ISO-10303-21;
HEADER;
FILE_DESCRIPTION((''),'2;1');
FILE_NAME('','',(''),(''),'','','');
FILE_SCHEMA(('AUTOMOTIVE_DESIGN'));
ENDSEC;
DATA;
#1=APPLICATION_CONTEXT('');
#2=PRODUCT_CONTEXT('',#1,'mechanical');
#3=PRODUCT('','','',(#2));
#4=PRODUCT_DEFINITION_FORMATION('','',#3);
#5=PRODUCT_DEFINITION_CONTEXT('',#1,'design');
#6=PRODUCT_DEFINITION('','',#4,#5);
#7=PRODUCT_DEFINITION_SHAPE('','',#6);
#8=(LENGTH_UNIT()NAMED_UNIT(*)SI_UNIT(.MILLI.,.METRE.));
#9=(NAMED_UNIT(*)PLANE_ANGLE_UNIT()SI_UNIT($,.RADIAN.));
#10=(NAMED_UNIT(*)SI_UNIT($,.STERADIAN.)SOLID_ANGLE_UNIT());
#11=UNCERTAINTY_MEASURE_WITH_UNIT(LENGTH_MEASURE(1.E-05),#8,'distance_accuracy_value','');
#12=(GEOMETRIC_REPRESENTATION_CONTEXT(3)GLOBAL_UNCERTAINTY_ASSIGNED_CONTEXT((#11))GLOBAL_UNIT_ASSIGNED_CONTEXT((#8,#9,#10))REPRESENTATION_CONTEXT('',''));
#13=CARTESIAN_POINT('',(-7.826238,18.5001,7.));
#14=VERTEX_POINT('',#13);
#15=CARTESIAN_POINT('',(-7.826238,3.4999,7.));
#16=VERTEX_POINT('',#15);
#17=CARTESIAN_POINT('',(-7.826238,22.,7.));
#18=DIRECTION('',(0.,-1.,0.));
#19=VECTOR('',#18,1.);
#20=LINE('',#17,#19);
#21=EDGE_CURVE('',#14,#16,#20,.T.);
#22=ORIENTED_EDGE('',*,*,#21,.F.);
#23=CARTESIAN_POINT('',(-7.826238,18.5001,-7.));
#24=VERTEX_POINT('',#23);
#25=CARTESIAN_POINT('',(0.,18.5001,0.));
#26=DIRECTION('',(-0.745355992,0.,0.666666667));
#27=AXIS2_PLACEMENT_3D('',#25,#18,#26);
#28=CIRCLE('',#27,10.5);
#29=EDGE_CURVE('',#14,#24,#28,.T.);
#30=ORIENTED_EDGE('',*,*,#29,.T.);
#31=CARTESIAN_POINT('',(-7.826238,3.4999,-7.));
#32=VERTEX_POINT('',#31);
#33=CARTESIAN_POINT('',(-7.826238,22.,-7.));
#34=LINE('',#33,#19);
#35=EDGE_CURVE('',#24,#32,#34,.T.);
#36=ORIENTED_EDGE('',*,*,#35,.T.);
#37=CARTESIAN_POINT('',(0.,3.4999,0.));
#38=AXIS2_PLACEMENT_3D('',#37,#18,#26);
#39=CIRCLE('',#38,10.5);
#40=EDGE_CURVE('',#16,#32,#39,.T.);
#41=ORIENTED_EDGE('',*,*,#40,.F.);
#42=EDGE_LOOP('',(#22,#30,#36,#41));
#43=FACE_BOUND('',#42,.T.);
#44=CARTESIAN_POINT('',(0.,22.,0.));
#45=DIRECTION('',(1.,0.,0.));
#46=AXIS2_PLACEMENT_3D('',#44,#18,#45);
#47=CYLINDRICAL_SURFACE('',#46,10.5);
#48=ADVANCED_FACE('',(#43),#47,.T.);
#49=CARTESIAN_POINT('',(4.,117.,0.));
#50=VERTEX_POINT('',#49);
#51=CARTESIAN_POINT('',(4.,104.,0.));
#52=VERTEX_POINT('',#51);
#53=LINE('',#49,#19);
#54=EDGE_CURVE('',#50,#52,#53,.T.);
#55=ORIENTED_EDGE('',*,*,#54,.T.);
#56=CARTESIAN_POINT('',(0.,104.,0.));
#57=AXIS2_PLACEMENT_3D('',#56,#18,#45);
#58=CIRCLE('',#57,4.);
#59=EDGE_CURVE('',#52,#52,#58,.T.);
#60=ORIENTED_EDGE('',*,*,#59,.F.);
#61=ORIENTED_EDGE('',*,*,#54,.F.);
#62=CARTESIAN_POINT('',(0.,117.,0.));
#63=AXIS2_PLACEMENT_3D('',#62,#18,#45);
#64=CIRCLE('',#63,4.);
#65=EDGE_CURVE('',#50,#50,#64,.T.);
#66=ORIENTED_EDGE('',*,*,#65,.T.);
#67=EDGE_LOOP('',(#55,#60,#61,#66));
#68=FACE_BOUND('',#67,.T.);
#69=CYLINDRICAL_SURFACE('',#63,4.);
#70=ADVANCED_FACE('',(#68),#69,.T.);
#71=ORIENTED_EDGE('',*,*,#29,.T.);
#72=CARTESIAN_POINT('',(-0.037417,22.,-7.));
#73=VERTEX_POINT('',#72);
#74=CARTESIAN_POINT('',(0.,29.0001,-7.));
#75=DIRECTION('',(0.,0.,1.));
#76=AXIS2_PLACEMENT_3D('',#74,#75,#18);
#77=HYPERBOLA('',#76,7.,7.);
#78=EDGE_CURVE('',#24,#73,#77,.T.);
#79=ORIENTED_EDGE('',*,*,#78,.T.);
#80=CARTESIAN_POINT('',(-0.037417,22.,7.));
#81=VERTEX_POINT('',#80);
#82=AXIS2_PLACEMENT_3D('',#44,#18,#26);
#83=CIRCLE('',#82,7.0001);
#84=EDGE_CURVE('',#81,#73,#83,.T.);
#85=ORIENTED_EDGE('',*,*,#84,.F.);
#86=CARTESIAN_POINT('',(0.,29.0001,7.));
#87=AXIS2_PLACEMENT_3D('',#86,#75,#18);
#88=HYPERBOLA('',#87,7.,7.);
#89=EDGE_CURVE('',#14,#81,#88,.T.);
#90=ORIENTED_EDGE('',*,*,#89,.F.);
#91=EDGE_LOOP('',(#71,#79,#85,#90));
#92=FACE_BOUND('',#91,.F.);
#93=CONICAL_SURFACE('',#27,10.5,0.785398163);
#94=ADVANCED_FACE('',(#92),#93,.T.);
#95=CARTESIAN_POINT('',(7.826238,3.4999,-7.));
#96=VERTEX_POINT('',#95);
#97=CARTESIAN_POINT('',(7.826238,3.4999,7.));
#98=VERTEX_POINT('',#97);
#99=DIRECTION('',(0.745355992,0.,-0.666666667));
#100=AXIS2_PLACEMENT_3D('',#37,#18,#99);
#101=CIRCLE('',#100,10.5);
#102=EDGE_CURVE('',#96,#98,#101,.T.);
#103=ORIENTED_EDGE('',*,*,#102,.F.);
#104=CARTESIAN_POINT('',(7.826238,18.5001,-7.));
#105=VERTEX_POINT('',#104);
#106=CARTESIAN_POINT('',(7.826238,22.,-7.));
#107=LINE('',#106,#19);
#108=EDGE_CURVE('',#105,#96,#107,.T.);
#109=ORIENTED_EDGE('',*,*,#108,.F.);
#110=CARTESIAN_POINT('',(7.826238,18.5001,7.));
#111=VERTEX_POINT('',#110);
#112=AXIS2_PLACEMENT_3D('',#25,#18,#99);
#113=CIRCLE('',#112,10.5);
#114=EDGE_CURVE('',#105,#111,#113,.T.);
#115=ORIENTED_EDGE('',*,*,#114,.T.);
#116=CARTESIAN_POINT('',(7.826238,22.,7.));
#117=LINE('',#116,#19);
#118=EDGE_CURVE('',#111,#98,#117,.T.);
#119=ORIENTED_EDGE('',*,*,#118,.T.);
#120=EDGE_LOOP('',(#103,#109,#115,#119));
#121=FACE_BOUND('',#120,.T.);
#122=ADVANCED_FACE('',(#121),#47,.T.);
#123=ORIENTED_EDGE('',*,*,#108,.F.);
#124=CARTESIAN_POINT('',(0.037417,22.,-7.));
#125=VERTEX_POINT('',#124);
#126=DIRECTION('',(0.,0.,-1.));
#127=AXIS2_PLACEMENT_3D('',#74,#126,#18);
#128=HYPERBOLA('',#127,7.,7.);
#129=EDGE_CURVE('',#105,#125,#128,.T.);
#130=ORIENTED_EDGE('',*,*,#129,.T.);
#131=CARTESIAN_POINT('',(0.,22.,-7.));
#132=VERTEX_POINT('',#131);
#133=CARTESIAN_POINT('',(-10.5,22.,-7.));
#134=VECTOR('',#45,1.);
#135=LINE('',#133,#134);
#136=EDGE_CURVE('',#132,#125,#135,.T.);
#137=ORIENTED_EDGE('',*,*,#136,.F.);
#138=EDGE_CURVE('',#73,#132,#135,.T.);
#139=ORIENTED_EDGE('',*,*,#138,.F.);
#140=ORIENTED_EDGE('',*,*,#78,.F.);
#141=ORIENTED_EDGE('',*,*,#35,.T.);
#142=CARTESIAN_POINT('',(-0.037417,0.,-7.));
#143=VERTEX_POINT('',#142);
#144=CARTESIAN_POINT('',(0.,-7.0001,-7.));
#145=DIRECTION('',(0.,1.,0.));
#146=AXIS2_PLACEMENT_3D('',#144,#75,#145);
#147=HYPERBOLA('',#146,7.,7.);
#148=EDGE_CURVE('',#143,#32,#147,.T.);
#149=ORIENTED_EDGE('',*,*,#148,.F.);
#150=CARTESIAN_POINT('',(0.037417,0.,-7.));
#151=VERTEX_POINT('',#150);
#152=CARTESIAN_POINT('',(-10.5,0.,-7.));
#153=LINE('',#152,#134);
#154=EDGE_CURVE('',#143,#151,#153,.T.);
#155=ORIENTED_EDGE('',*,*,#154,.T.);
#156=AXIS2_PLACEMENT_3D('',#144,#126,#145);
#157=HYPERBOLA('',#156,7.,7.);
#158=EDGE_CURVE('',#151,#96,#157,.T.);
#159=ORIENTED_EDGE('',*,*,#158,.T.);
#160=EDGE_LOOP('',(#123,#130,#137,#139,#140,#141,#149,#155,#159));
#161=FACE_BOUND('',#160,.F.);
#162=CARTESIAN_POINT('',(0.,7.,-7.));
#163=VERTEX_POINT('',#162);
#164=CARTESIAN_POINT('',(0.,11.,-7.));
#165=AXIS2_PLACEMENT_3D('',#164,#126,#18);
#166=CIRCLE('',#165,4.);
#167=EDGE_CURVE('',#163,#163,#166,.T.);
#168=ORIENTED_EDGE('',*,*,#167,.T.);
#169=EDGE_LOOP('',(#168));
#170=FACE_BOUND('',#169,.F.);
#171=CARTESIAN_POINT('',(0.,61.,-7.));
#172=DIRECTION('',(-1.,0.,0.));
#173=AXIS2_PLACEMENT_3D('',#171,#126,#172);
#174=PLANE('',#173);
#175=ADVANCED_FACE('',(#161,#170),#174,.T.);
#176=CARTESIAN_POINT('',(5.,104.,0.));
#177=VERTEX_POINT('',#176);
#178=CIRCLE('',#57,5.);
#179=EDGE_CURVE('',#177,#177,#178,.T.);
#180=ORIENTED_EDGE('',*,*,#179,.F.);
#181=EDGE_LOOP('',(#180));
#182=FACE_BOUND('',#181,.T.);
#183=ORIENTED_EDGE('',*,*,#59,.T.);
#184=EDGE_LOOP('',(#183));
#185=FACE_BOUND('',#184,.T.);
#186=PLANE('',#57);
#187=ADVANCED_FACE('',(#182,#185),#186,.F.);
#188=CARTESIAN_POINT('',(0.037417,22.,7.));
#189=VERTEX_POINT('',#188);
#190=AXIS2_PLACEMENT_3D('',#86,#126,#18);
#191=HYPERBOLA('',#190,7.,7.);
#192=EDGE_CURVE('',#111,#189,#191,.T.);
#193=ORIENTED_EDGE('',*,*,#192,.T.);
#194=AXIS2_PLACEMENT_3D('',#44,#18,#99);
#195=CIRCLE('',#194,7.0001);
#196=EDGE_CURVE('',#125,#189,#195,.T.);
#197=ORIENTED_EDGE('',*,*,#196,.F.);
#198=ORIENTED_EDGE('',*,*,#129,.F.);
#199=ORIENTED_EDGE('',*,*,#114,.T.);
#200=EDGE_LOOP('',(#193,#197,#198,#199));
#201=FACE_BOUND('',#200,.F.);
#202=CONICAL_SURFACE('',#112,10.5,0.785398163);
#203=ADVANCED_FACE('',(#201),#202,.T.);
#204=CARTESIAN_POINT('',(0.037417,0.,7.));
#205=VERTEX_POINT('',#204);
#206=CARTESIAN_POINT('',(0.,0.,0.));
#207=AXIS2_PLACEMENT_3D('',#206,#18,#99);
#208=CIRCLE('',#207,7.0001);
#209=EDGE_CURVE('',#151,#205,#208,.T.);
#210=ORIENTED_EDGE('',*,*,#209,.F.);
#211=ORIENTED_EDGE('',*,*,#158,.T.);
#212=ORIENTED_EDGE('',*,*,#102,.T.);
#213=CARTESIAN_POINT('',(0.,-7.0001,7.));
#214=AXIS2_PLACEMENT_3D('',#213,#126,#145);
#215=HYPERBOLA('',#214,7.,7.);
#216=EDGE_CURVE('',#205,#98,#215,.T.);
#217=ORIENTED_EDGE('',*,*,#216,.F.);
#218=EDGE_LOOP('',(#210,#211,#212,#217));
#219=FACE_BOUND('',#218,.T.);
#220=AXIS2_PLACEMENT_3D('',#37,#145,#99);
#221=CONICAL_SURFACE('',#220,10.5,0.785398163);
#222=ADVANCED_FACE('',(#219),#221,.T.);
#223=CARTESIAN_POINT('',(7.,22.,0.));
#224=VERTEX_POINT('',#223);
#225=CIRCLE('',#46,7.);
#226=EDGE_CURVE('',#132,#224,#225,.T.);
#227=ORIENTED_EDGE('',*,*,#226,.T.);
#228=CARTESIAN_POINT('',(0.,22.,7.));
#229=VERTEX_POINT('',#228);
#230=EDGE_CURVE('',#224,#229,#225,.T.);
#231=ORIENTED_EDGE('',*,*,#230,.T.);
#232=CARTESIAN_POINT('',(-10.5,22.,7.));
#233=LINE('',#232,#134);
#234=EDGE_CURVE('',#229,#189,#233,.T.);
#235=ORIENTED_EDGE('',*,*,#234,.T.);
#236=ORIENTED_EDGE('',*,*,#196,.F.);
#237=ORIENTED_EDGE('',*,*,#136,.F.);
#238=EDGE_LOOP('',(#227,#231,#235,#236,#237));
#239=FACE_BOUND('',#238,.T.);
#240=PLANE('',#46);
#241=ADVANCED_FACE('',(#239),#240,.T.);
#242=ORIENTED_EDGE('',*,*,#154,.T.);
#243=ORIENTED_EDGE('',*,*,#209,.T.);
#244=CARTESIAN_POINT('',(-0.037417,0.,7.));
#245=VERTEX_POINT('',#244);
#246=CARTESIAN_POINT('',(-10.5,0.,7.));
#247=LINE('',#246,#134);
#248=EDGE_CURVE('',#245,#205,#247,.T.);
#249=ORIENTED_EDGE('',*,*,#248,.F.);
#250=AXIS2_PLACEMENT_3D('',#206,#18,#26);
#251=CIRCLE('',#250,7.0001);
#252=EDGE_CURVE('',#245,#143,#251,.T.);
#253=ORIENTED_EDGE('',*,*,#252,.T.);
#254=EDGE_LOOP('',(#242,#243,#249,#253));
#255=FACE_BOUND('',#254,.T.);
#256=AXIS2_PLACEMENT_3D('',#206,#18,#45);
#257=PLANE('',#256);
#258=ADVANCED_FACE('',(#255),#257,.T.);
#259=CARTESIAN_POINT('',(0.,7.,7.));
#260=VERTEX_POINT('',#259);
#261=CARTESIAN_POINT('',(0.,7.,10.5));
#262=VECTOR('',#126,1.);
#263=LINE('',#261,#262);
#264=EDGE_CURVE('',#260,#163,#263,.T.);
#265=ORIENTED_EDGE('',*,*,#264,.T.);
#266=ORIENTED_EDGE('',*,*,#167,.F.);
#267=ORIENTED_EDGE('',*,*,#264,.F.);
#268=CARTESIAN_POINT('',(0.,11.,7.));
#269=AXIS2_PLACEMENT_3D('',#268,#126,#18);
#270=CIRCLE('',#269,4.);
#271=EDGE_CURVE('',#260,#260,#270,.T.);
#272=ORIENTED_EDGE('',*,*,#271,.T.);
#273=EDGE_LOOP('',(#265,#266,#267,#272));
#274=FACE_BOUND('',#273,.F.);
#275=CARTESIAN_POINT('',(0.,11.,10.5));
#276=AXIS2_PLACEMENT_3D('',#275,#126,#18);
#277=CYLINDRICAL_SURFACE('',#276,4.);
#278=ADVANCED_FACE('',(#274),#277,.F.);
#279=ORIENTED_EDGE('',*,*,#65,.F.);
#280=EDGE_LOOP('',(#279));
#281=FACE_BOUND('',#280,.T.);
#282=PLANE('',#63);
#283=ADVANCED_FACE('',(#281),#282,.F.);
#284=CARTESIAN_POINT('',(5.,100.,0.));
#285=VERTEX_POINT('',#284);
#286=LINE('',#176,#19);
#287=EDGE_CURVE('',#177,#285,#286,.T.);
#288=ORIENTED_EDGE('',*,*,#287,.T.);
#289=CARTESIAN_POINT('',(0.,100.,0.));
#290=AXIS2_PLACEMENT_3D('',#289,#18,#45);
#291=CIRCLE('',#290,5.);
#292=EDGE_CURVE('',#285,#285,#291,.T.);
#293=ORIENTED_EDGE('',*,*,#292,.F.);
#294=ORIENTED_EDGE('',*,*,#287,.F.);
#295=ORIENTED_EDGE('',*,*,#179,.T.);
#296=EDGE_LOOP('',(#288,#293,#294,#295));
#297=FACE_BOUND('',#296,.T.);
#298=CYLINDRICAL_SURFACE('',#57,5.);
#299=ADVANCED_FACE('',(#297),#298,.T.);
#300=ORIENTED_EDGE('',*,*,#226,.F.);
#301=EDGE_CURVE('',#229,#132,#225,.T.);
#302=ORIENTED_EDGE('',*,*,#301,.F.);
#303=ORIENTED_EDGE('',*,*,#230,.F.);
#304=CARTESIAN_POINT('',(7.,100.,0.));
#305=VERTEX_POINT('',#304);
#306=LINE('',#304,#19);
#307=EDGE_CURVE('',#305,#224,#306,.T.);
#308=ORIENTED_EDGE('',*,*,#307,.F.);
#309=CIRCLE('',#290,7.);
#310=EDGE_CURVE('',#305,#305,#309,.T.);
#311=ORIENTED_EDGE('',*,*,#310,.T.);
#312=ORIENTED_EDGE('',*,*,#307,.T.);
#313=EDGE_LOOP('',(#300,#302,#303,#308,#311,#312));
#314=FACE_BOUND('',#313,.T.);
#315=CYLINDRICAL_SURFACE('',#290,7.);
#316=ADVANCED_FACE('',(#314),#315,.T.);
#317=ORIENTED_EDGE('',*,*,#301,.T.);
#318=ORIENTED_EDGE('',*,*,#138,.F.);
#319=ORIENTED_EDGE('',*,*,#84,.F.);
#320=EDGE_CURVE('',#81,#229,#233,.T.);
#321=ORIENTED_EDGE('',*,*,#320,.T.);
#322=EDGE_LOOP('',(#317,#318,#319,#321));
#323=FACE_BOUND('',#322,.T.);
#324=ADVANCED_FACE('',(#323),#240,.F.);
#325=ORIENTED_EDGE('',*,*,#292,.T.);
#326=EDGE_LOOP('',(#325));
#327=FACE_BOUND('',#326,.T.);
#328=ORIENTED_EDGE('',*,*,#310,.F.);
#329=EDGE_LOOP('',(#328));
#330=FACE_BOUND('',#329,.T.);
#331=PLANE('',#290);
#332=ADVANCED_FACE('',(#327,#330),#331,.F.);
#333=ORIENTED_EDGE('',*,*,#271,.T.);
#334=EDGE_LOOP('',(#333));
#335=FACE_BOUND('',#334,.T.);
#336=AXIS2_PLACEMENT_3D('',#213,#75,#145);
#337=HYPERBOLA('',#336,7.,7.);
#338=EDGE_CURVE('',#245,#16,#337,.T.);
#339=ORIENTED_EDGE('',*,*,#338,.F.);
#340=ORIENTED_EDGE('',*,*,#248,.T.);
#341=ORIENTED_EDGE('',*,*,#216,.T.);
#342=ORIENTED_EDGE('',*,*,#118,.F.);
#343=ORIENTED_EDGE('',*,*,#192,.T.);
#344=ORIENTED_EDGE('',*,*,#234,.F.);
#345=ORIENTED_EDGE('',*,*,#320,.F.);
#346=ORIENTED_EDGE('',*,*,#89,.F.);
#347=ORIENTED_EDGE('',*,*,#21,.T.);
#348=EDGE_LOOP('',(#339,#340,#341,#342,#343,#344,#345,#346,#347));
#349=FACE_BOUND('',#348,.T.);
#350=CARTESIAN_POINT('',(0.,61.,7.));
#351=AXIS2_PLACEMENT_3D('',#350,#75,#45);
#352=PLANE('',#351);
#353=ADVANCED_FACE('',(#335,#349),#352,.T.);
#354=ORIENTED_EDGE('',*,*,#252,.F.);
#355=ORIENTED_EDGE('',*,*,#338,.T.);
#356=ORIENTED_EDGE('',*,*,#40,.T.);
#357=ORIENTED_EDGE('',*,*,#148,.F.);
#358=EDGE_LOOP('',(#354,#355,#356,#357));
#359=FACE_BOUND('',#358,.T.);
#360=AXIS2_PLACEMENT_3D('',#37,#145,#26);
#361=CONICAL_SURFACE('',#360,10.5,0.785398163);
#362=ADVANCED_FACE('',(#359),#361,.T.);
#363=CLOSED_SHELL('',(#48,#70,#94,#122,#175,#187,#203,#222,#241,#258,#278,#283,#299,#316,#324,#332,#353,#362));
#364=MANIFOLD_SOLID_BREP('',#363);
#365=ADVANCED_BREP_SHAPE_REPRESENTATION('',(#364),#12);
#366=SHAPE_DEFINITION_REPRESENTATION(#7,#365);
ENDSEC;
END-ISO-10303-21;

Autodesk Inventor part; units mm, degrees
ref_plane "XZ Plane" through (0, 0, 0) normal (0, 1, 0) x (-1, 0, 0)
sketch "Sketch1" plane through (0, 0, 0) normal (0, 0, 1) x (1, 0, 0)
  line L0 (10.5, 0) -> (0, 0)
  line L1 (0, 117) -> (4, 117)
  line L2 (4, 117) -> (4, 104)
  line L3 (4, 104) -> (5, 104)
  line L4 (5, 104) -> (5, 100)
  line L5 (5, 100) -> (7, 100)
  line L6 (7, 100) -> (7, 22)
  line L7 (10.5, 22) -> (10.5, 0)
  line L8 (0, 117) -> (0, 0)
  line L9 (7, 22) -> (10.5, 22)
  dimension "d10" = 21
  dimension "d11" = 14
  dimension "d12" = 22
  dimension "d13" = 100
  dimension "d14" = 104
  dimension "d15" = 117
  dimension "d16" = 8
  dimension "d17" = 10
revolve "Revolution1" add sketch "Sketch1" angle 360 about axis through (0, 117, 0) along (0, -1, 0)
sketch "Sketch2" plane through (0, 0, 0) normal (0, 0, 1) x (1, 0, 0)
  line L0 (-10.5, 22) -> (-10.5, 0) projected
  line L1 (10.5, 22) -> (10.5, 0) projected
  line L2 (-10.5, 11) -> (10.5, 11) construction
  circle A0 centre (0, 11) radius 4 construction
  dimension "d1" = 8
ref_plane "Work Plane1" through (0, 11, 10.5) normal (0, 0, 1) x (1, 0, 0)
sketch "Sketch3" plane through (0, 11, 10.5) normal (0, 0, 1) x (1, 0, 0)
  point P0 (0, -11)
  point P1 (0, 0)
hole "Hole1" at (0, 11, 10.5) direction (0, 0, -1) diameter 8 end through all
ref_plane "Work Plane2" through (0, 61, 7) normal (0, 0, 1) x (1, 0, 0)
sketch "Sketch4" plane through (0, 61, 7) normal (0, 0, 1) x (1, 0, 0)
  line L0 (-10.5, -39) -> (10.5, -39) projected
  line L1 (-10.5, -61) -> (10.5, -61) projected
  line L2 (-10.5, -61) -> (-10.5, -39)
  line L3 (10.5, -61) -> (10.5, -39)
  point P0 (0, -61)
extrude "Extrusion1" cut sketch "Sketch4" along normal through all
mirror "Mirror1" about plane through (0, 0, 0) normal (0, 0, 1) of "Extrusion1"
chamfer "Chamfer1" distance 3.5 angle 45 4 edges at (10.5, 22, 0) (-10.5, 22, 0) (10.5, 0, 0) (-10.5, 0, 0)
thread "Thread1" size "M8x1" class "6g" standard "ANSI Metric M Profile" full length
equation "\"LENGTH\" = 25.4"
properties part number "TU-006" material "Stainless Steel"
